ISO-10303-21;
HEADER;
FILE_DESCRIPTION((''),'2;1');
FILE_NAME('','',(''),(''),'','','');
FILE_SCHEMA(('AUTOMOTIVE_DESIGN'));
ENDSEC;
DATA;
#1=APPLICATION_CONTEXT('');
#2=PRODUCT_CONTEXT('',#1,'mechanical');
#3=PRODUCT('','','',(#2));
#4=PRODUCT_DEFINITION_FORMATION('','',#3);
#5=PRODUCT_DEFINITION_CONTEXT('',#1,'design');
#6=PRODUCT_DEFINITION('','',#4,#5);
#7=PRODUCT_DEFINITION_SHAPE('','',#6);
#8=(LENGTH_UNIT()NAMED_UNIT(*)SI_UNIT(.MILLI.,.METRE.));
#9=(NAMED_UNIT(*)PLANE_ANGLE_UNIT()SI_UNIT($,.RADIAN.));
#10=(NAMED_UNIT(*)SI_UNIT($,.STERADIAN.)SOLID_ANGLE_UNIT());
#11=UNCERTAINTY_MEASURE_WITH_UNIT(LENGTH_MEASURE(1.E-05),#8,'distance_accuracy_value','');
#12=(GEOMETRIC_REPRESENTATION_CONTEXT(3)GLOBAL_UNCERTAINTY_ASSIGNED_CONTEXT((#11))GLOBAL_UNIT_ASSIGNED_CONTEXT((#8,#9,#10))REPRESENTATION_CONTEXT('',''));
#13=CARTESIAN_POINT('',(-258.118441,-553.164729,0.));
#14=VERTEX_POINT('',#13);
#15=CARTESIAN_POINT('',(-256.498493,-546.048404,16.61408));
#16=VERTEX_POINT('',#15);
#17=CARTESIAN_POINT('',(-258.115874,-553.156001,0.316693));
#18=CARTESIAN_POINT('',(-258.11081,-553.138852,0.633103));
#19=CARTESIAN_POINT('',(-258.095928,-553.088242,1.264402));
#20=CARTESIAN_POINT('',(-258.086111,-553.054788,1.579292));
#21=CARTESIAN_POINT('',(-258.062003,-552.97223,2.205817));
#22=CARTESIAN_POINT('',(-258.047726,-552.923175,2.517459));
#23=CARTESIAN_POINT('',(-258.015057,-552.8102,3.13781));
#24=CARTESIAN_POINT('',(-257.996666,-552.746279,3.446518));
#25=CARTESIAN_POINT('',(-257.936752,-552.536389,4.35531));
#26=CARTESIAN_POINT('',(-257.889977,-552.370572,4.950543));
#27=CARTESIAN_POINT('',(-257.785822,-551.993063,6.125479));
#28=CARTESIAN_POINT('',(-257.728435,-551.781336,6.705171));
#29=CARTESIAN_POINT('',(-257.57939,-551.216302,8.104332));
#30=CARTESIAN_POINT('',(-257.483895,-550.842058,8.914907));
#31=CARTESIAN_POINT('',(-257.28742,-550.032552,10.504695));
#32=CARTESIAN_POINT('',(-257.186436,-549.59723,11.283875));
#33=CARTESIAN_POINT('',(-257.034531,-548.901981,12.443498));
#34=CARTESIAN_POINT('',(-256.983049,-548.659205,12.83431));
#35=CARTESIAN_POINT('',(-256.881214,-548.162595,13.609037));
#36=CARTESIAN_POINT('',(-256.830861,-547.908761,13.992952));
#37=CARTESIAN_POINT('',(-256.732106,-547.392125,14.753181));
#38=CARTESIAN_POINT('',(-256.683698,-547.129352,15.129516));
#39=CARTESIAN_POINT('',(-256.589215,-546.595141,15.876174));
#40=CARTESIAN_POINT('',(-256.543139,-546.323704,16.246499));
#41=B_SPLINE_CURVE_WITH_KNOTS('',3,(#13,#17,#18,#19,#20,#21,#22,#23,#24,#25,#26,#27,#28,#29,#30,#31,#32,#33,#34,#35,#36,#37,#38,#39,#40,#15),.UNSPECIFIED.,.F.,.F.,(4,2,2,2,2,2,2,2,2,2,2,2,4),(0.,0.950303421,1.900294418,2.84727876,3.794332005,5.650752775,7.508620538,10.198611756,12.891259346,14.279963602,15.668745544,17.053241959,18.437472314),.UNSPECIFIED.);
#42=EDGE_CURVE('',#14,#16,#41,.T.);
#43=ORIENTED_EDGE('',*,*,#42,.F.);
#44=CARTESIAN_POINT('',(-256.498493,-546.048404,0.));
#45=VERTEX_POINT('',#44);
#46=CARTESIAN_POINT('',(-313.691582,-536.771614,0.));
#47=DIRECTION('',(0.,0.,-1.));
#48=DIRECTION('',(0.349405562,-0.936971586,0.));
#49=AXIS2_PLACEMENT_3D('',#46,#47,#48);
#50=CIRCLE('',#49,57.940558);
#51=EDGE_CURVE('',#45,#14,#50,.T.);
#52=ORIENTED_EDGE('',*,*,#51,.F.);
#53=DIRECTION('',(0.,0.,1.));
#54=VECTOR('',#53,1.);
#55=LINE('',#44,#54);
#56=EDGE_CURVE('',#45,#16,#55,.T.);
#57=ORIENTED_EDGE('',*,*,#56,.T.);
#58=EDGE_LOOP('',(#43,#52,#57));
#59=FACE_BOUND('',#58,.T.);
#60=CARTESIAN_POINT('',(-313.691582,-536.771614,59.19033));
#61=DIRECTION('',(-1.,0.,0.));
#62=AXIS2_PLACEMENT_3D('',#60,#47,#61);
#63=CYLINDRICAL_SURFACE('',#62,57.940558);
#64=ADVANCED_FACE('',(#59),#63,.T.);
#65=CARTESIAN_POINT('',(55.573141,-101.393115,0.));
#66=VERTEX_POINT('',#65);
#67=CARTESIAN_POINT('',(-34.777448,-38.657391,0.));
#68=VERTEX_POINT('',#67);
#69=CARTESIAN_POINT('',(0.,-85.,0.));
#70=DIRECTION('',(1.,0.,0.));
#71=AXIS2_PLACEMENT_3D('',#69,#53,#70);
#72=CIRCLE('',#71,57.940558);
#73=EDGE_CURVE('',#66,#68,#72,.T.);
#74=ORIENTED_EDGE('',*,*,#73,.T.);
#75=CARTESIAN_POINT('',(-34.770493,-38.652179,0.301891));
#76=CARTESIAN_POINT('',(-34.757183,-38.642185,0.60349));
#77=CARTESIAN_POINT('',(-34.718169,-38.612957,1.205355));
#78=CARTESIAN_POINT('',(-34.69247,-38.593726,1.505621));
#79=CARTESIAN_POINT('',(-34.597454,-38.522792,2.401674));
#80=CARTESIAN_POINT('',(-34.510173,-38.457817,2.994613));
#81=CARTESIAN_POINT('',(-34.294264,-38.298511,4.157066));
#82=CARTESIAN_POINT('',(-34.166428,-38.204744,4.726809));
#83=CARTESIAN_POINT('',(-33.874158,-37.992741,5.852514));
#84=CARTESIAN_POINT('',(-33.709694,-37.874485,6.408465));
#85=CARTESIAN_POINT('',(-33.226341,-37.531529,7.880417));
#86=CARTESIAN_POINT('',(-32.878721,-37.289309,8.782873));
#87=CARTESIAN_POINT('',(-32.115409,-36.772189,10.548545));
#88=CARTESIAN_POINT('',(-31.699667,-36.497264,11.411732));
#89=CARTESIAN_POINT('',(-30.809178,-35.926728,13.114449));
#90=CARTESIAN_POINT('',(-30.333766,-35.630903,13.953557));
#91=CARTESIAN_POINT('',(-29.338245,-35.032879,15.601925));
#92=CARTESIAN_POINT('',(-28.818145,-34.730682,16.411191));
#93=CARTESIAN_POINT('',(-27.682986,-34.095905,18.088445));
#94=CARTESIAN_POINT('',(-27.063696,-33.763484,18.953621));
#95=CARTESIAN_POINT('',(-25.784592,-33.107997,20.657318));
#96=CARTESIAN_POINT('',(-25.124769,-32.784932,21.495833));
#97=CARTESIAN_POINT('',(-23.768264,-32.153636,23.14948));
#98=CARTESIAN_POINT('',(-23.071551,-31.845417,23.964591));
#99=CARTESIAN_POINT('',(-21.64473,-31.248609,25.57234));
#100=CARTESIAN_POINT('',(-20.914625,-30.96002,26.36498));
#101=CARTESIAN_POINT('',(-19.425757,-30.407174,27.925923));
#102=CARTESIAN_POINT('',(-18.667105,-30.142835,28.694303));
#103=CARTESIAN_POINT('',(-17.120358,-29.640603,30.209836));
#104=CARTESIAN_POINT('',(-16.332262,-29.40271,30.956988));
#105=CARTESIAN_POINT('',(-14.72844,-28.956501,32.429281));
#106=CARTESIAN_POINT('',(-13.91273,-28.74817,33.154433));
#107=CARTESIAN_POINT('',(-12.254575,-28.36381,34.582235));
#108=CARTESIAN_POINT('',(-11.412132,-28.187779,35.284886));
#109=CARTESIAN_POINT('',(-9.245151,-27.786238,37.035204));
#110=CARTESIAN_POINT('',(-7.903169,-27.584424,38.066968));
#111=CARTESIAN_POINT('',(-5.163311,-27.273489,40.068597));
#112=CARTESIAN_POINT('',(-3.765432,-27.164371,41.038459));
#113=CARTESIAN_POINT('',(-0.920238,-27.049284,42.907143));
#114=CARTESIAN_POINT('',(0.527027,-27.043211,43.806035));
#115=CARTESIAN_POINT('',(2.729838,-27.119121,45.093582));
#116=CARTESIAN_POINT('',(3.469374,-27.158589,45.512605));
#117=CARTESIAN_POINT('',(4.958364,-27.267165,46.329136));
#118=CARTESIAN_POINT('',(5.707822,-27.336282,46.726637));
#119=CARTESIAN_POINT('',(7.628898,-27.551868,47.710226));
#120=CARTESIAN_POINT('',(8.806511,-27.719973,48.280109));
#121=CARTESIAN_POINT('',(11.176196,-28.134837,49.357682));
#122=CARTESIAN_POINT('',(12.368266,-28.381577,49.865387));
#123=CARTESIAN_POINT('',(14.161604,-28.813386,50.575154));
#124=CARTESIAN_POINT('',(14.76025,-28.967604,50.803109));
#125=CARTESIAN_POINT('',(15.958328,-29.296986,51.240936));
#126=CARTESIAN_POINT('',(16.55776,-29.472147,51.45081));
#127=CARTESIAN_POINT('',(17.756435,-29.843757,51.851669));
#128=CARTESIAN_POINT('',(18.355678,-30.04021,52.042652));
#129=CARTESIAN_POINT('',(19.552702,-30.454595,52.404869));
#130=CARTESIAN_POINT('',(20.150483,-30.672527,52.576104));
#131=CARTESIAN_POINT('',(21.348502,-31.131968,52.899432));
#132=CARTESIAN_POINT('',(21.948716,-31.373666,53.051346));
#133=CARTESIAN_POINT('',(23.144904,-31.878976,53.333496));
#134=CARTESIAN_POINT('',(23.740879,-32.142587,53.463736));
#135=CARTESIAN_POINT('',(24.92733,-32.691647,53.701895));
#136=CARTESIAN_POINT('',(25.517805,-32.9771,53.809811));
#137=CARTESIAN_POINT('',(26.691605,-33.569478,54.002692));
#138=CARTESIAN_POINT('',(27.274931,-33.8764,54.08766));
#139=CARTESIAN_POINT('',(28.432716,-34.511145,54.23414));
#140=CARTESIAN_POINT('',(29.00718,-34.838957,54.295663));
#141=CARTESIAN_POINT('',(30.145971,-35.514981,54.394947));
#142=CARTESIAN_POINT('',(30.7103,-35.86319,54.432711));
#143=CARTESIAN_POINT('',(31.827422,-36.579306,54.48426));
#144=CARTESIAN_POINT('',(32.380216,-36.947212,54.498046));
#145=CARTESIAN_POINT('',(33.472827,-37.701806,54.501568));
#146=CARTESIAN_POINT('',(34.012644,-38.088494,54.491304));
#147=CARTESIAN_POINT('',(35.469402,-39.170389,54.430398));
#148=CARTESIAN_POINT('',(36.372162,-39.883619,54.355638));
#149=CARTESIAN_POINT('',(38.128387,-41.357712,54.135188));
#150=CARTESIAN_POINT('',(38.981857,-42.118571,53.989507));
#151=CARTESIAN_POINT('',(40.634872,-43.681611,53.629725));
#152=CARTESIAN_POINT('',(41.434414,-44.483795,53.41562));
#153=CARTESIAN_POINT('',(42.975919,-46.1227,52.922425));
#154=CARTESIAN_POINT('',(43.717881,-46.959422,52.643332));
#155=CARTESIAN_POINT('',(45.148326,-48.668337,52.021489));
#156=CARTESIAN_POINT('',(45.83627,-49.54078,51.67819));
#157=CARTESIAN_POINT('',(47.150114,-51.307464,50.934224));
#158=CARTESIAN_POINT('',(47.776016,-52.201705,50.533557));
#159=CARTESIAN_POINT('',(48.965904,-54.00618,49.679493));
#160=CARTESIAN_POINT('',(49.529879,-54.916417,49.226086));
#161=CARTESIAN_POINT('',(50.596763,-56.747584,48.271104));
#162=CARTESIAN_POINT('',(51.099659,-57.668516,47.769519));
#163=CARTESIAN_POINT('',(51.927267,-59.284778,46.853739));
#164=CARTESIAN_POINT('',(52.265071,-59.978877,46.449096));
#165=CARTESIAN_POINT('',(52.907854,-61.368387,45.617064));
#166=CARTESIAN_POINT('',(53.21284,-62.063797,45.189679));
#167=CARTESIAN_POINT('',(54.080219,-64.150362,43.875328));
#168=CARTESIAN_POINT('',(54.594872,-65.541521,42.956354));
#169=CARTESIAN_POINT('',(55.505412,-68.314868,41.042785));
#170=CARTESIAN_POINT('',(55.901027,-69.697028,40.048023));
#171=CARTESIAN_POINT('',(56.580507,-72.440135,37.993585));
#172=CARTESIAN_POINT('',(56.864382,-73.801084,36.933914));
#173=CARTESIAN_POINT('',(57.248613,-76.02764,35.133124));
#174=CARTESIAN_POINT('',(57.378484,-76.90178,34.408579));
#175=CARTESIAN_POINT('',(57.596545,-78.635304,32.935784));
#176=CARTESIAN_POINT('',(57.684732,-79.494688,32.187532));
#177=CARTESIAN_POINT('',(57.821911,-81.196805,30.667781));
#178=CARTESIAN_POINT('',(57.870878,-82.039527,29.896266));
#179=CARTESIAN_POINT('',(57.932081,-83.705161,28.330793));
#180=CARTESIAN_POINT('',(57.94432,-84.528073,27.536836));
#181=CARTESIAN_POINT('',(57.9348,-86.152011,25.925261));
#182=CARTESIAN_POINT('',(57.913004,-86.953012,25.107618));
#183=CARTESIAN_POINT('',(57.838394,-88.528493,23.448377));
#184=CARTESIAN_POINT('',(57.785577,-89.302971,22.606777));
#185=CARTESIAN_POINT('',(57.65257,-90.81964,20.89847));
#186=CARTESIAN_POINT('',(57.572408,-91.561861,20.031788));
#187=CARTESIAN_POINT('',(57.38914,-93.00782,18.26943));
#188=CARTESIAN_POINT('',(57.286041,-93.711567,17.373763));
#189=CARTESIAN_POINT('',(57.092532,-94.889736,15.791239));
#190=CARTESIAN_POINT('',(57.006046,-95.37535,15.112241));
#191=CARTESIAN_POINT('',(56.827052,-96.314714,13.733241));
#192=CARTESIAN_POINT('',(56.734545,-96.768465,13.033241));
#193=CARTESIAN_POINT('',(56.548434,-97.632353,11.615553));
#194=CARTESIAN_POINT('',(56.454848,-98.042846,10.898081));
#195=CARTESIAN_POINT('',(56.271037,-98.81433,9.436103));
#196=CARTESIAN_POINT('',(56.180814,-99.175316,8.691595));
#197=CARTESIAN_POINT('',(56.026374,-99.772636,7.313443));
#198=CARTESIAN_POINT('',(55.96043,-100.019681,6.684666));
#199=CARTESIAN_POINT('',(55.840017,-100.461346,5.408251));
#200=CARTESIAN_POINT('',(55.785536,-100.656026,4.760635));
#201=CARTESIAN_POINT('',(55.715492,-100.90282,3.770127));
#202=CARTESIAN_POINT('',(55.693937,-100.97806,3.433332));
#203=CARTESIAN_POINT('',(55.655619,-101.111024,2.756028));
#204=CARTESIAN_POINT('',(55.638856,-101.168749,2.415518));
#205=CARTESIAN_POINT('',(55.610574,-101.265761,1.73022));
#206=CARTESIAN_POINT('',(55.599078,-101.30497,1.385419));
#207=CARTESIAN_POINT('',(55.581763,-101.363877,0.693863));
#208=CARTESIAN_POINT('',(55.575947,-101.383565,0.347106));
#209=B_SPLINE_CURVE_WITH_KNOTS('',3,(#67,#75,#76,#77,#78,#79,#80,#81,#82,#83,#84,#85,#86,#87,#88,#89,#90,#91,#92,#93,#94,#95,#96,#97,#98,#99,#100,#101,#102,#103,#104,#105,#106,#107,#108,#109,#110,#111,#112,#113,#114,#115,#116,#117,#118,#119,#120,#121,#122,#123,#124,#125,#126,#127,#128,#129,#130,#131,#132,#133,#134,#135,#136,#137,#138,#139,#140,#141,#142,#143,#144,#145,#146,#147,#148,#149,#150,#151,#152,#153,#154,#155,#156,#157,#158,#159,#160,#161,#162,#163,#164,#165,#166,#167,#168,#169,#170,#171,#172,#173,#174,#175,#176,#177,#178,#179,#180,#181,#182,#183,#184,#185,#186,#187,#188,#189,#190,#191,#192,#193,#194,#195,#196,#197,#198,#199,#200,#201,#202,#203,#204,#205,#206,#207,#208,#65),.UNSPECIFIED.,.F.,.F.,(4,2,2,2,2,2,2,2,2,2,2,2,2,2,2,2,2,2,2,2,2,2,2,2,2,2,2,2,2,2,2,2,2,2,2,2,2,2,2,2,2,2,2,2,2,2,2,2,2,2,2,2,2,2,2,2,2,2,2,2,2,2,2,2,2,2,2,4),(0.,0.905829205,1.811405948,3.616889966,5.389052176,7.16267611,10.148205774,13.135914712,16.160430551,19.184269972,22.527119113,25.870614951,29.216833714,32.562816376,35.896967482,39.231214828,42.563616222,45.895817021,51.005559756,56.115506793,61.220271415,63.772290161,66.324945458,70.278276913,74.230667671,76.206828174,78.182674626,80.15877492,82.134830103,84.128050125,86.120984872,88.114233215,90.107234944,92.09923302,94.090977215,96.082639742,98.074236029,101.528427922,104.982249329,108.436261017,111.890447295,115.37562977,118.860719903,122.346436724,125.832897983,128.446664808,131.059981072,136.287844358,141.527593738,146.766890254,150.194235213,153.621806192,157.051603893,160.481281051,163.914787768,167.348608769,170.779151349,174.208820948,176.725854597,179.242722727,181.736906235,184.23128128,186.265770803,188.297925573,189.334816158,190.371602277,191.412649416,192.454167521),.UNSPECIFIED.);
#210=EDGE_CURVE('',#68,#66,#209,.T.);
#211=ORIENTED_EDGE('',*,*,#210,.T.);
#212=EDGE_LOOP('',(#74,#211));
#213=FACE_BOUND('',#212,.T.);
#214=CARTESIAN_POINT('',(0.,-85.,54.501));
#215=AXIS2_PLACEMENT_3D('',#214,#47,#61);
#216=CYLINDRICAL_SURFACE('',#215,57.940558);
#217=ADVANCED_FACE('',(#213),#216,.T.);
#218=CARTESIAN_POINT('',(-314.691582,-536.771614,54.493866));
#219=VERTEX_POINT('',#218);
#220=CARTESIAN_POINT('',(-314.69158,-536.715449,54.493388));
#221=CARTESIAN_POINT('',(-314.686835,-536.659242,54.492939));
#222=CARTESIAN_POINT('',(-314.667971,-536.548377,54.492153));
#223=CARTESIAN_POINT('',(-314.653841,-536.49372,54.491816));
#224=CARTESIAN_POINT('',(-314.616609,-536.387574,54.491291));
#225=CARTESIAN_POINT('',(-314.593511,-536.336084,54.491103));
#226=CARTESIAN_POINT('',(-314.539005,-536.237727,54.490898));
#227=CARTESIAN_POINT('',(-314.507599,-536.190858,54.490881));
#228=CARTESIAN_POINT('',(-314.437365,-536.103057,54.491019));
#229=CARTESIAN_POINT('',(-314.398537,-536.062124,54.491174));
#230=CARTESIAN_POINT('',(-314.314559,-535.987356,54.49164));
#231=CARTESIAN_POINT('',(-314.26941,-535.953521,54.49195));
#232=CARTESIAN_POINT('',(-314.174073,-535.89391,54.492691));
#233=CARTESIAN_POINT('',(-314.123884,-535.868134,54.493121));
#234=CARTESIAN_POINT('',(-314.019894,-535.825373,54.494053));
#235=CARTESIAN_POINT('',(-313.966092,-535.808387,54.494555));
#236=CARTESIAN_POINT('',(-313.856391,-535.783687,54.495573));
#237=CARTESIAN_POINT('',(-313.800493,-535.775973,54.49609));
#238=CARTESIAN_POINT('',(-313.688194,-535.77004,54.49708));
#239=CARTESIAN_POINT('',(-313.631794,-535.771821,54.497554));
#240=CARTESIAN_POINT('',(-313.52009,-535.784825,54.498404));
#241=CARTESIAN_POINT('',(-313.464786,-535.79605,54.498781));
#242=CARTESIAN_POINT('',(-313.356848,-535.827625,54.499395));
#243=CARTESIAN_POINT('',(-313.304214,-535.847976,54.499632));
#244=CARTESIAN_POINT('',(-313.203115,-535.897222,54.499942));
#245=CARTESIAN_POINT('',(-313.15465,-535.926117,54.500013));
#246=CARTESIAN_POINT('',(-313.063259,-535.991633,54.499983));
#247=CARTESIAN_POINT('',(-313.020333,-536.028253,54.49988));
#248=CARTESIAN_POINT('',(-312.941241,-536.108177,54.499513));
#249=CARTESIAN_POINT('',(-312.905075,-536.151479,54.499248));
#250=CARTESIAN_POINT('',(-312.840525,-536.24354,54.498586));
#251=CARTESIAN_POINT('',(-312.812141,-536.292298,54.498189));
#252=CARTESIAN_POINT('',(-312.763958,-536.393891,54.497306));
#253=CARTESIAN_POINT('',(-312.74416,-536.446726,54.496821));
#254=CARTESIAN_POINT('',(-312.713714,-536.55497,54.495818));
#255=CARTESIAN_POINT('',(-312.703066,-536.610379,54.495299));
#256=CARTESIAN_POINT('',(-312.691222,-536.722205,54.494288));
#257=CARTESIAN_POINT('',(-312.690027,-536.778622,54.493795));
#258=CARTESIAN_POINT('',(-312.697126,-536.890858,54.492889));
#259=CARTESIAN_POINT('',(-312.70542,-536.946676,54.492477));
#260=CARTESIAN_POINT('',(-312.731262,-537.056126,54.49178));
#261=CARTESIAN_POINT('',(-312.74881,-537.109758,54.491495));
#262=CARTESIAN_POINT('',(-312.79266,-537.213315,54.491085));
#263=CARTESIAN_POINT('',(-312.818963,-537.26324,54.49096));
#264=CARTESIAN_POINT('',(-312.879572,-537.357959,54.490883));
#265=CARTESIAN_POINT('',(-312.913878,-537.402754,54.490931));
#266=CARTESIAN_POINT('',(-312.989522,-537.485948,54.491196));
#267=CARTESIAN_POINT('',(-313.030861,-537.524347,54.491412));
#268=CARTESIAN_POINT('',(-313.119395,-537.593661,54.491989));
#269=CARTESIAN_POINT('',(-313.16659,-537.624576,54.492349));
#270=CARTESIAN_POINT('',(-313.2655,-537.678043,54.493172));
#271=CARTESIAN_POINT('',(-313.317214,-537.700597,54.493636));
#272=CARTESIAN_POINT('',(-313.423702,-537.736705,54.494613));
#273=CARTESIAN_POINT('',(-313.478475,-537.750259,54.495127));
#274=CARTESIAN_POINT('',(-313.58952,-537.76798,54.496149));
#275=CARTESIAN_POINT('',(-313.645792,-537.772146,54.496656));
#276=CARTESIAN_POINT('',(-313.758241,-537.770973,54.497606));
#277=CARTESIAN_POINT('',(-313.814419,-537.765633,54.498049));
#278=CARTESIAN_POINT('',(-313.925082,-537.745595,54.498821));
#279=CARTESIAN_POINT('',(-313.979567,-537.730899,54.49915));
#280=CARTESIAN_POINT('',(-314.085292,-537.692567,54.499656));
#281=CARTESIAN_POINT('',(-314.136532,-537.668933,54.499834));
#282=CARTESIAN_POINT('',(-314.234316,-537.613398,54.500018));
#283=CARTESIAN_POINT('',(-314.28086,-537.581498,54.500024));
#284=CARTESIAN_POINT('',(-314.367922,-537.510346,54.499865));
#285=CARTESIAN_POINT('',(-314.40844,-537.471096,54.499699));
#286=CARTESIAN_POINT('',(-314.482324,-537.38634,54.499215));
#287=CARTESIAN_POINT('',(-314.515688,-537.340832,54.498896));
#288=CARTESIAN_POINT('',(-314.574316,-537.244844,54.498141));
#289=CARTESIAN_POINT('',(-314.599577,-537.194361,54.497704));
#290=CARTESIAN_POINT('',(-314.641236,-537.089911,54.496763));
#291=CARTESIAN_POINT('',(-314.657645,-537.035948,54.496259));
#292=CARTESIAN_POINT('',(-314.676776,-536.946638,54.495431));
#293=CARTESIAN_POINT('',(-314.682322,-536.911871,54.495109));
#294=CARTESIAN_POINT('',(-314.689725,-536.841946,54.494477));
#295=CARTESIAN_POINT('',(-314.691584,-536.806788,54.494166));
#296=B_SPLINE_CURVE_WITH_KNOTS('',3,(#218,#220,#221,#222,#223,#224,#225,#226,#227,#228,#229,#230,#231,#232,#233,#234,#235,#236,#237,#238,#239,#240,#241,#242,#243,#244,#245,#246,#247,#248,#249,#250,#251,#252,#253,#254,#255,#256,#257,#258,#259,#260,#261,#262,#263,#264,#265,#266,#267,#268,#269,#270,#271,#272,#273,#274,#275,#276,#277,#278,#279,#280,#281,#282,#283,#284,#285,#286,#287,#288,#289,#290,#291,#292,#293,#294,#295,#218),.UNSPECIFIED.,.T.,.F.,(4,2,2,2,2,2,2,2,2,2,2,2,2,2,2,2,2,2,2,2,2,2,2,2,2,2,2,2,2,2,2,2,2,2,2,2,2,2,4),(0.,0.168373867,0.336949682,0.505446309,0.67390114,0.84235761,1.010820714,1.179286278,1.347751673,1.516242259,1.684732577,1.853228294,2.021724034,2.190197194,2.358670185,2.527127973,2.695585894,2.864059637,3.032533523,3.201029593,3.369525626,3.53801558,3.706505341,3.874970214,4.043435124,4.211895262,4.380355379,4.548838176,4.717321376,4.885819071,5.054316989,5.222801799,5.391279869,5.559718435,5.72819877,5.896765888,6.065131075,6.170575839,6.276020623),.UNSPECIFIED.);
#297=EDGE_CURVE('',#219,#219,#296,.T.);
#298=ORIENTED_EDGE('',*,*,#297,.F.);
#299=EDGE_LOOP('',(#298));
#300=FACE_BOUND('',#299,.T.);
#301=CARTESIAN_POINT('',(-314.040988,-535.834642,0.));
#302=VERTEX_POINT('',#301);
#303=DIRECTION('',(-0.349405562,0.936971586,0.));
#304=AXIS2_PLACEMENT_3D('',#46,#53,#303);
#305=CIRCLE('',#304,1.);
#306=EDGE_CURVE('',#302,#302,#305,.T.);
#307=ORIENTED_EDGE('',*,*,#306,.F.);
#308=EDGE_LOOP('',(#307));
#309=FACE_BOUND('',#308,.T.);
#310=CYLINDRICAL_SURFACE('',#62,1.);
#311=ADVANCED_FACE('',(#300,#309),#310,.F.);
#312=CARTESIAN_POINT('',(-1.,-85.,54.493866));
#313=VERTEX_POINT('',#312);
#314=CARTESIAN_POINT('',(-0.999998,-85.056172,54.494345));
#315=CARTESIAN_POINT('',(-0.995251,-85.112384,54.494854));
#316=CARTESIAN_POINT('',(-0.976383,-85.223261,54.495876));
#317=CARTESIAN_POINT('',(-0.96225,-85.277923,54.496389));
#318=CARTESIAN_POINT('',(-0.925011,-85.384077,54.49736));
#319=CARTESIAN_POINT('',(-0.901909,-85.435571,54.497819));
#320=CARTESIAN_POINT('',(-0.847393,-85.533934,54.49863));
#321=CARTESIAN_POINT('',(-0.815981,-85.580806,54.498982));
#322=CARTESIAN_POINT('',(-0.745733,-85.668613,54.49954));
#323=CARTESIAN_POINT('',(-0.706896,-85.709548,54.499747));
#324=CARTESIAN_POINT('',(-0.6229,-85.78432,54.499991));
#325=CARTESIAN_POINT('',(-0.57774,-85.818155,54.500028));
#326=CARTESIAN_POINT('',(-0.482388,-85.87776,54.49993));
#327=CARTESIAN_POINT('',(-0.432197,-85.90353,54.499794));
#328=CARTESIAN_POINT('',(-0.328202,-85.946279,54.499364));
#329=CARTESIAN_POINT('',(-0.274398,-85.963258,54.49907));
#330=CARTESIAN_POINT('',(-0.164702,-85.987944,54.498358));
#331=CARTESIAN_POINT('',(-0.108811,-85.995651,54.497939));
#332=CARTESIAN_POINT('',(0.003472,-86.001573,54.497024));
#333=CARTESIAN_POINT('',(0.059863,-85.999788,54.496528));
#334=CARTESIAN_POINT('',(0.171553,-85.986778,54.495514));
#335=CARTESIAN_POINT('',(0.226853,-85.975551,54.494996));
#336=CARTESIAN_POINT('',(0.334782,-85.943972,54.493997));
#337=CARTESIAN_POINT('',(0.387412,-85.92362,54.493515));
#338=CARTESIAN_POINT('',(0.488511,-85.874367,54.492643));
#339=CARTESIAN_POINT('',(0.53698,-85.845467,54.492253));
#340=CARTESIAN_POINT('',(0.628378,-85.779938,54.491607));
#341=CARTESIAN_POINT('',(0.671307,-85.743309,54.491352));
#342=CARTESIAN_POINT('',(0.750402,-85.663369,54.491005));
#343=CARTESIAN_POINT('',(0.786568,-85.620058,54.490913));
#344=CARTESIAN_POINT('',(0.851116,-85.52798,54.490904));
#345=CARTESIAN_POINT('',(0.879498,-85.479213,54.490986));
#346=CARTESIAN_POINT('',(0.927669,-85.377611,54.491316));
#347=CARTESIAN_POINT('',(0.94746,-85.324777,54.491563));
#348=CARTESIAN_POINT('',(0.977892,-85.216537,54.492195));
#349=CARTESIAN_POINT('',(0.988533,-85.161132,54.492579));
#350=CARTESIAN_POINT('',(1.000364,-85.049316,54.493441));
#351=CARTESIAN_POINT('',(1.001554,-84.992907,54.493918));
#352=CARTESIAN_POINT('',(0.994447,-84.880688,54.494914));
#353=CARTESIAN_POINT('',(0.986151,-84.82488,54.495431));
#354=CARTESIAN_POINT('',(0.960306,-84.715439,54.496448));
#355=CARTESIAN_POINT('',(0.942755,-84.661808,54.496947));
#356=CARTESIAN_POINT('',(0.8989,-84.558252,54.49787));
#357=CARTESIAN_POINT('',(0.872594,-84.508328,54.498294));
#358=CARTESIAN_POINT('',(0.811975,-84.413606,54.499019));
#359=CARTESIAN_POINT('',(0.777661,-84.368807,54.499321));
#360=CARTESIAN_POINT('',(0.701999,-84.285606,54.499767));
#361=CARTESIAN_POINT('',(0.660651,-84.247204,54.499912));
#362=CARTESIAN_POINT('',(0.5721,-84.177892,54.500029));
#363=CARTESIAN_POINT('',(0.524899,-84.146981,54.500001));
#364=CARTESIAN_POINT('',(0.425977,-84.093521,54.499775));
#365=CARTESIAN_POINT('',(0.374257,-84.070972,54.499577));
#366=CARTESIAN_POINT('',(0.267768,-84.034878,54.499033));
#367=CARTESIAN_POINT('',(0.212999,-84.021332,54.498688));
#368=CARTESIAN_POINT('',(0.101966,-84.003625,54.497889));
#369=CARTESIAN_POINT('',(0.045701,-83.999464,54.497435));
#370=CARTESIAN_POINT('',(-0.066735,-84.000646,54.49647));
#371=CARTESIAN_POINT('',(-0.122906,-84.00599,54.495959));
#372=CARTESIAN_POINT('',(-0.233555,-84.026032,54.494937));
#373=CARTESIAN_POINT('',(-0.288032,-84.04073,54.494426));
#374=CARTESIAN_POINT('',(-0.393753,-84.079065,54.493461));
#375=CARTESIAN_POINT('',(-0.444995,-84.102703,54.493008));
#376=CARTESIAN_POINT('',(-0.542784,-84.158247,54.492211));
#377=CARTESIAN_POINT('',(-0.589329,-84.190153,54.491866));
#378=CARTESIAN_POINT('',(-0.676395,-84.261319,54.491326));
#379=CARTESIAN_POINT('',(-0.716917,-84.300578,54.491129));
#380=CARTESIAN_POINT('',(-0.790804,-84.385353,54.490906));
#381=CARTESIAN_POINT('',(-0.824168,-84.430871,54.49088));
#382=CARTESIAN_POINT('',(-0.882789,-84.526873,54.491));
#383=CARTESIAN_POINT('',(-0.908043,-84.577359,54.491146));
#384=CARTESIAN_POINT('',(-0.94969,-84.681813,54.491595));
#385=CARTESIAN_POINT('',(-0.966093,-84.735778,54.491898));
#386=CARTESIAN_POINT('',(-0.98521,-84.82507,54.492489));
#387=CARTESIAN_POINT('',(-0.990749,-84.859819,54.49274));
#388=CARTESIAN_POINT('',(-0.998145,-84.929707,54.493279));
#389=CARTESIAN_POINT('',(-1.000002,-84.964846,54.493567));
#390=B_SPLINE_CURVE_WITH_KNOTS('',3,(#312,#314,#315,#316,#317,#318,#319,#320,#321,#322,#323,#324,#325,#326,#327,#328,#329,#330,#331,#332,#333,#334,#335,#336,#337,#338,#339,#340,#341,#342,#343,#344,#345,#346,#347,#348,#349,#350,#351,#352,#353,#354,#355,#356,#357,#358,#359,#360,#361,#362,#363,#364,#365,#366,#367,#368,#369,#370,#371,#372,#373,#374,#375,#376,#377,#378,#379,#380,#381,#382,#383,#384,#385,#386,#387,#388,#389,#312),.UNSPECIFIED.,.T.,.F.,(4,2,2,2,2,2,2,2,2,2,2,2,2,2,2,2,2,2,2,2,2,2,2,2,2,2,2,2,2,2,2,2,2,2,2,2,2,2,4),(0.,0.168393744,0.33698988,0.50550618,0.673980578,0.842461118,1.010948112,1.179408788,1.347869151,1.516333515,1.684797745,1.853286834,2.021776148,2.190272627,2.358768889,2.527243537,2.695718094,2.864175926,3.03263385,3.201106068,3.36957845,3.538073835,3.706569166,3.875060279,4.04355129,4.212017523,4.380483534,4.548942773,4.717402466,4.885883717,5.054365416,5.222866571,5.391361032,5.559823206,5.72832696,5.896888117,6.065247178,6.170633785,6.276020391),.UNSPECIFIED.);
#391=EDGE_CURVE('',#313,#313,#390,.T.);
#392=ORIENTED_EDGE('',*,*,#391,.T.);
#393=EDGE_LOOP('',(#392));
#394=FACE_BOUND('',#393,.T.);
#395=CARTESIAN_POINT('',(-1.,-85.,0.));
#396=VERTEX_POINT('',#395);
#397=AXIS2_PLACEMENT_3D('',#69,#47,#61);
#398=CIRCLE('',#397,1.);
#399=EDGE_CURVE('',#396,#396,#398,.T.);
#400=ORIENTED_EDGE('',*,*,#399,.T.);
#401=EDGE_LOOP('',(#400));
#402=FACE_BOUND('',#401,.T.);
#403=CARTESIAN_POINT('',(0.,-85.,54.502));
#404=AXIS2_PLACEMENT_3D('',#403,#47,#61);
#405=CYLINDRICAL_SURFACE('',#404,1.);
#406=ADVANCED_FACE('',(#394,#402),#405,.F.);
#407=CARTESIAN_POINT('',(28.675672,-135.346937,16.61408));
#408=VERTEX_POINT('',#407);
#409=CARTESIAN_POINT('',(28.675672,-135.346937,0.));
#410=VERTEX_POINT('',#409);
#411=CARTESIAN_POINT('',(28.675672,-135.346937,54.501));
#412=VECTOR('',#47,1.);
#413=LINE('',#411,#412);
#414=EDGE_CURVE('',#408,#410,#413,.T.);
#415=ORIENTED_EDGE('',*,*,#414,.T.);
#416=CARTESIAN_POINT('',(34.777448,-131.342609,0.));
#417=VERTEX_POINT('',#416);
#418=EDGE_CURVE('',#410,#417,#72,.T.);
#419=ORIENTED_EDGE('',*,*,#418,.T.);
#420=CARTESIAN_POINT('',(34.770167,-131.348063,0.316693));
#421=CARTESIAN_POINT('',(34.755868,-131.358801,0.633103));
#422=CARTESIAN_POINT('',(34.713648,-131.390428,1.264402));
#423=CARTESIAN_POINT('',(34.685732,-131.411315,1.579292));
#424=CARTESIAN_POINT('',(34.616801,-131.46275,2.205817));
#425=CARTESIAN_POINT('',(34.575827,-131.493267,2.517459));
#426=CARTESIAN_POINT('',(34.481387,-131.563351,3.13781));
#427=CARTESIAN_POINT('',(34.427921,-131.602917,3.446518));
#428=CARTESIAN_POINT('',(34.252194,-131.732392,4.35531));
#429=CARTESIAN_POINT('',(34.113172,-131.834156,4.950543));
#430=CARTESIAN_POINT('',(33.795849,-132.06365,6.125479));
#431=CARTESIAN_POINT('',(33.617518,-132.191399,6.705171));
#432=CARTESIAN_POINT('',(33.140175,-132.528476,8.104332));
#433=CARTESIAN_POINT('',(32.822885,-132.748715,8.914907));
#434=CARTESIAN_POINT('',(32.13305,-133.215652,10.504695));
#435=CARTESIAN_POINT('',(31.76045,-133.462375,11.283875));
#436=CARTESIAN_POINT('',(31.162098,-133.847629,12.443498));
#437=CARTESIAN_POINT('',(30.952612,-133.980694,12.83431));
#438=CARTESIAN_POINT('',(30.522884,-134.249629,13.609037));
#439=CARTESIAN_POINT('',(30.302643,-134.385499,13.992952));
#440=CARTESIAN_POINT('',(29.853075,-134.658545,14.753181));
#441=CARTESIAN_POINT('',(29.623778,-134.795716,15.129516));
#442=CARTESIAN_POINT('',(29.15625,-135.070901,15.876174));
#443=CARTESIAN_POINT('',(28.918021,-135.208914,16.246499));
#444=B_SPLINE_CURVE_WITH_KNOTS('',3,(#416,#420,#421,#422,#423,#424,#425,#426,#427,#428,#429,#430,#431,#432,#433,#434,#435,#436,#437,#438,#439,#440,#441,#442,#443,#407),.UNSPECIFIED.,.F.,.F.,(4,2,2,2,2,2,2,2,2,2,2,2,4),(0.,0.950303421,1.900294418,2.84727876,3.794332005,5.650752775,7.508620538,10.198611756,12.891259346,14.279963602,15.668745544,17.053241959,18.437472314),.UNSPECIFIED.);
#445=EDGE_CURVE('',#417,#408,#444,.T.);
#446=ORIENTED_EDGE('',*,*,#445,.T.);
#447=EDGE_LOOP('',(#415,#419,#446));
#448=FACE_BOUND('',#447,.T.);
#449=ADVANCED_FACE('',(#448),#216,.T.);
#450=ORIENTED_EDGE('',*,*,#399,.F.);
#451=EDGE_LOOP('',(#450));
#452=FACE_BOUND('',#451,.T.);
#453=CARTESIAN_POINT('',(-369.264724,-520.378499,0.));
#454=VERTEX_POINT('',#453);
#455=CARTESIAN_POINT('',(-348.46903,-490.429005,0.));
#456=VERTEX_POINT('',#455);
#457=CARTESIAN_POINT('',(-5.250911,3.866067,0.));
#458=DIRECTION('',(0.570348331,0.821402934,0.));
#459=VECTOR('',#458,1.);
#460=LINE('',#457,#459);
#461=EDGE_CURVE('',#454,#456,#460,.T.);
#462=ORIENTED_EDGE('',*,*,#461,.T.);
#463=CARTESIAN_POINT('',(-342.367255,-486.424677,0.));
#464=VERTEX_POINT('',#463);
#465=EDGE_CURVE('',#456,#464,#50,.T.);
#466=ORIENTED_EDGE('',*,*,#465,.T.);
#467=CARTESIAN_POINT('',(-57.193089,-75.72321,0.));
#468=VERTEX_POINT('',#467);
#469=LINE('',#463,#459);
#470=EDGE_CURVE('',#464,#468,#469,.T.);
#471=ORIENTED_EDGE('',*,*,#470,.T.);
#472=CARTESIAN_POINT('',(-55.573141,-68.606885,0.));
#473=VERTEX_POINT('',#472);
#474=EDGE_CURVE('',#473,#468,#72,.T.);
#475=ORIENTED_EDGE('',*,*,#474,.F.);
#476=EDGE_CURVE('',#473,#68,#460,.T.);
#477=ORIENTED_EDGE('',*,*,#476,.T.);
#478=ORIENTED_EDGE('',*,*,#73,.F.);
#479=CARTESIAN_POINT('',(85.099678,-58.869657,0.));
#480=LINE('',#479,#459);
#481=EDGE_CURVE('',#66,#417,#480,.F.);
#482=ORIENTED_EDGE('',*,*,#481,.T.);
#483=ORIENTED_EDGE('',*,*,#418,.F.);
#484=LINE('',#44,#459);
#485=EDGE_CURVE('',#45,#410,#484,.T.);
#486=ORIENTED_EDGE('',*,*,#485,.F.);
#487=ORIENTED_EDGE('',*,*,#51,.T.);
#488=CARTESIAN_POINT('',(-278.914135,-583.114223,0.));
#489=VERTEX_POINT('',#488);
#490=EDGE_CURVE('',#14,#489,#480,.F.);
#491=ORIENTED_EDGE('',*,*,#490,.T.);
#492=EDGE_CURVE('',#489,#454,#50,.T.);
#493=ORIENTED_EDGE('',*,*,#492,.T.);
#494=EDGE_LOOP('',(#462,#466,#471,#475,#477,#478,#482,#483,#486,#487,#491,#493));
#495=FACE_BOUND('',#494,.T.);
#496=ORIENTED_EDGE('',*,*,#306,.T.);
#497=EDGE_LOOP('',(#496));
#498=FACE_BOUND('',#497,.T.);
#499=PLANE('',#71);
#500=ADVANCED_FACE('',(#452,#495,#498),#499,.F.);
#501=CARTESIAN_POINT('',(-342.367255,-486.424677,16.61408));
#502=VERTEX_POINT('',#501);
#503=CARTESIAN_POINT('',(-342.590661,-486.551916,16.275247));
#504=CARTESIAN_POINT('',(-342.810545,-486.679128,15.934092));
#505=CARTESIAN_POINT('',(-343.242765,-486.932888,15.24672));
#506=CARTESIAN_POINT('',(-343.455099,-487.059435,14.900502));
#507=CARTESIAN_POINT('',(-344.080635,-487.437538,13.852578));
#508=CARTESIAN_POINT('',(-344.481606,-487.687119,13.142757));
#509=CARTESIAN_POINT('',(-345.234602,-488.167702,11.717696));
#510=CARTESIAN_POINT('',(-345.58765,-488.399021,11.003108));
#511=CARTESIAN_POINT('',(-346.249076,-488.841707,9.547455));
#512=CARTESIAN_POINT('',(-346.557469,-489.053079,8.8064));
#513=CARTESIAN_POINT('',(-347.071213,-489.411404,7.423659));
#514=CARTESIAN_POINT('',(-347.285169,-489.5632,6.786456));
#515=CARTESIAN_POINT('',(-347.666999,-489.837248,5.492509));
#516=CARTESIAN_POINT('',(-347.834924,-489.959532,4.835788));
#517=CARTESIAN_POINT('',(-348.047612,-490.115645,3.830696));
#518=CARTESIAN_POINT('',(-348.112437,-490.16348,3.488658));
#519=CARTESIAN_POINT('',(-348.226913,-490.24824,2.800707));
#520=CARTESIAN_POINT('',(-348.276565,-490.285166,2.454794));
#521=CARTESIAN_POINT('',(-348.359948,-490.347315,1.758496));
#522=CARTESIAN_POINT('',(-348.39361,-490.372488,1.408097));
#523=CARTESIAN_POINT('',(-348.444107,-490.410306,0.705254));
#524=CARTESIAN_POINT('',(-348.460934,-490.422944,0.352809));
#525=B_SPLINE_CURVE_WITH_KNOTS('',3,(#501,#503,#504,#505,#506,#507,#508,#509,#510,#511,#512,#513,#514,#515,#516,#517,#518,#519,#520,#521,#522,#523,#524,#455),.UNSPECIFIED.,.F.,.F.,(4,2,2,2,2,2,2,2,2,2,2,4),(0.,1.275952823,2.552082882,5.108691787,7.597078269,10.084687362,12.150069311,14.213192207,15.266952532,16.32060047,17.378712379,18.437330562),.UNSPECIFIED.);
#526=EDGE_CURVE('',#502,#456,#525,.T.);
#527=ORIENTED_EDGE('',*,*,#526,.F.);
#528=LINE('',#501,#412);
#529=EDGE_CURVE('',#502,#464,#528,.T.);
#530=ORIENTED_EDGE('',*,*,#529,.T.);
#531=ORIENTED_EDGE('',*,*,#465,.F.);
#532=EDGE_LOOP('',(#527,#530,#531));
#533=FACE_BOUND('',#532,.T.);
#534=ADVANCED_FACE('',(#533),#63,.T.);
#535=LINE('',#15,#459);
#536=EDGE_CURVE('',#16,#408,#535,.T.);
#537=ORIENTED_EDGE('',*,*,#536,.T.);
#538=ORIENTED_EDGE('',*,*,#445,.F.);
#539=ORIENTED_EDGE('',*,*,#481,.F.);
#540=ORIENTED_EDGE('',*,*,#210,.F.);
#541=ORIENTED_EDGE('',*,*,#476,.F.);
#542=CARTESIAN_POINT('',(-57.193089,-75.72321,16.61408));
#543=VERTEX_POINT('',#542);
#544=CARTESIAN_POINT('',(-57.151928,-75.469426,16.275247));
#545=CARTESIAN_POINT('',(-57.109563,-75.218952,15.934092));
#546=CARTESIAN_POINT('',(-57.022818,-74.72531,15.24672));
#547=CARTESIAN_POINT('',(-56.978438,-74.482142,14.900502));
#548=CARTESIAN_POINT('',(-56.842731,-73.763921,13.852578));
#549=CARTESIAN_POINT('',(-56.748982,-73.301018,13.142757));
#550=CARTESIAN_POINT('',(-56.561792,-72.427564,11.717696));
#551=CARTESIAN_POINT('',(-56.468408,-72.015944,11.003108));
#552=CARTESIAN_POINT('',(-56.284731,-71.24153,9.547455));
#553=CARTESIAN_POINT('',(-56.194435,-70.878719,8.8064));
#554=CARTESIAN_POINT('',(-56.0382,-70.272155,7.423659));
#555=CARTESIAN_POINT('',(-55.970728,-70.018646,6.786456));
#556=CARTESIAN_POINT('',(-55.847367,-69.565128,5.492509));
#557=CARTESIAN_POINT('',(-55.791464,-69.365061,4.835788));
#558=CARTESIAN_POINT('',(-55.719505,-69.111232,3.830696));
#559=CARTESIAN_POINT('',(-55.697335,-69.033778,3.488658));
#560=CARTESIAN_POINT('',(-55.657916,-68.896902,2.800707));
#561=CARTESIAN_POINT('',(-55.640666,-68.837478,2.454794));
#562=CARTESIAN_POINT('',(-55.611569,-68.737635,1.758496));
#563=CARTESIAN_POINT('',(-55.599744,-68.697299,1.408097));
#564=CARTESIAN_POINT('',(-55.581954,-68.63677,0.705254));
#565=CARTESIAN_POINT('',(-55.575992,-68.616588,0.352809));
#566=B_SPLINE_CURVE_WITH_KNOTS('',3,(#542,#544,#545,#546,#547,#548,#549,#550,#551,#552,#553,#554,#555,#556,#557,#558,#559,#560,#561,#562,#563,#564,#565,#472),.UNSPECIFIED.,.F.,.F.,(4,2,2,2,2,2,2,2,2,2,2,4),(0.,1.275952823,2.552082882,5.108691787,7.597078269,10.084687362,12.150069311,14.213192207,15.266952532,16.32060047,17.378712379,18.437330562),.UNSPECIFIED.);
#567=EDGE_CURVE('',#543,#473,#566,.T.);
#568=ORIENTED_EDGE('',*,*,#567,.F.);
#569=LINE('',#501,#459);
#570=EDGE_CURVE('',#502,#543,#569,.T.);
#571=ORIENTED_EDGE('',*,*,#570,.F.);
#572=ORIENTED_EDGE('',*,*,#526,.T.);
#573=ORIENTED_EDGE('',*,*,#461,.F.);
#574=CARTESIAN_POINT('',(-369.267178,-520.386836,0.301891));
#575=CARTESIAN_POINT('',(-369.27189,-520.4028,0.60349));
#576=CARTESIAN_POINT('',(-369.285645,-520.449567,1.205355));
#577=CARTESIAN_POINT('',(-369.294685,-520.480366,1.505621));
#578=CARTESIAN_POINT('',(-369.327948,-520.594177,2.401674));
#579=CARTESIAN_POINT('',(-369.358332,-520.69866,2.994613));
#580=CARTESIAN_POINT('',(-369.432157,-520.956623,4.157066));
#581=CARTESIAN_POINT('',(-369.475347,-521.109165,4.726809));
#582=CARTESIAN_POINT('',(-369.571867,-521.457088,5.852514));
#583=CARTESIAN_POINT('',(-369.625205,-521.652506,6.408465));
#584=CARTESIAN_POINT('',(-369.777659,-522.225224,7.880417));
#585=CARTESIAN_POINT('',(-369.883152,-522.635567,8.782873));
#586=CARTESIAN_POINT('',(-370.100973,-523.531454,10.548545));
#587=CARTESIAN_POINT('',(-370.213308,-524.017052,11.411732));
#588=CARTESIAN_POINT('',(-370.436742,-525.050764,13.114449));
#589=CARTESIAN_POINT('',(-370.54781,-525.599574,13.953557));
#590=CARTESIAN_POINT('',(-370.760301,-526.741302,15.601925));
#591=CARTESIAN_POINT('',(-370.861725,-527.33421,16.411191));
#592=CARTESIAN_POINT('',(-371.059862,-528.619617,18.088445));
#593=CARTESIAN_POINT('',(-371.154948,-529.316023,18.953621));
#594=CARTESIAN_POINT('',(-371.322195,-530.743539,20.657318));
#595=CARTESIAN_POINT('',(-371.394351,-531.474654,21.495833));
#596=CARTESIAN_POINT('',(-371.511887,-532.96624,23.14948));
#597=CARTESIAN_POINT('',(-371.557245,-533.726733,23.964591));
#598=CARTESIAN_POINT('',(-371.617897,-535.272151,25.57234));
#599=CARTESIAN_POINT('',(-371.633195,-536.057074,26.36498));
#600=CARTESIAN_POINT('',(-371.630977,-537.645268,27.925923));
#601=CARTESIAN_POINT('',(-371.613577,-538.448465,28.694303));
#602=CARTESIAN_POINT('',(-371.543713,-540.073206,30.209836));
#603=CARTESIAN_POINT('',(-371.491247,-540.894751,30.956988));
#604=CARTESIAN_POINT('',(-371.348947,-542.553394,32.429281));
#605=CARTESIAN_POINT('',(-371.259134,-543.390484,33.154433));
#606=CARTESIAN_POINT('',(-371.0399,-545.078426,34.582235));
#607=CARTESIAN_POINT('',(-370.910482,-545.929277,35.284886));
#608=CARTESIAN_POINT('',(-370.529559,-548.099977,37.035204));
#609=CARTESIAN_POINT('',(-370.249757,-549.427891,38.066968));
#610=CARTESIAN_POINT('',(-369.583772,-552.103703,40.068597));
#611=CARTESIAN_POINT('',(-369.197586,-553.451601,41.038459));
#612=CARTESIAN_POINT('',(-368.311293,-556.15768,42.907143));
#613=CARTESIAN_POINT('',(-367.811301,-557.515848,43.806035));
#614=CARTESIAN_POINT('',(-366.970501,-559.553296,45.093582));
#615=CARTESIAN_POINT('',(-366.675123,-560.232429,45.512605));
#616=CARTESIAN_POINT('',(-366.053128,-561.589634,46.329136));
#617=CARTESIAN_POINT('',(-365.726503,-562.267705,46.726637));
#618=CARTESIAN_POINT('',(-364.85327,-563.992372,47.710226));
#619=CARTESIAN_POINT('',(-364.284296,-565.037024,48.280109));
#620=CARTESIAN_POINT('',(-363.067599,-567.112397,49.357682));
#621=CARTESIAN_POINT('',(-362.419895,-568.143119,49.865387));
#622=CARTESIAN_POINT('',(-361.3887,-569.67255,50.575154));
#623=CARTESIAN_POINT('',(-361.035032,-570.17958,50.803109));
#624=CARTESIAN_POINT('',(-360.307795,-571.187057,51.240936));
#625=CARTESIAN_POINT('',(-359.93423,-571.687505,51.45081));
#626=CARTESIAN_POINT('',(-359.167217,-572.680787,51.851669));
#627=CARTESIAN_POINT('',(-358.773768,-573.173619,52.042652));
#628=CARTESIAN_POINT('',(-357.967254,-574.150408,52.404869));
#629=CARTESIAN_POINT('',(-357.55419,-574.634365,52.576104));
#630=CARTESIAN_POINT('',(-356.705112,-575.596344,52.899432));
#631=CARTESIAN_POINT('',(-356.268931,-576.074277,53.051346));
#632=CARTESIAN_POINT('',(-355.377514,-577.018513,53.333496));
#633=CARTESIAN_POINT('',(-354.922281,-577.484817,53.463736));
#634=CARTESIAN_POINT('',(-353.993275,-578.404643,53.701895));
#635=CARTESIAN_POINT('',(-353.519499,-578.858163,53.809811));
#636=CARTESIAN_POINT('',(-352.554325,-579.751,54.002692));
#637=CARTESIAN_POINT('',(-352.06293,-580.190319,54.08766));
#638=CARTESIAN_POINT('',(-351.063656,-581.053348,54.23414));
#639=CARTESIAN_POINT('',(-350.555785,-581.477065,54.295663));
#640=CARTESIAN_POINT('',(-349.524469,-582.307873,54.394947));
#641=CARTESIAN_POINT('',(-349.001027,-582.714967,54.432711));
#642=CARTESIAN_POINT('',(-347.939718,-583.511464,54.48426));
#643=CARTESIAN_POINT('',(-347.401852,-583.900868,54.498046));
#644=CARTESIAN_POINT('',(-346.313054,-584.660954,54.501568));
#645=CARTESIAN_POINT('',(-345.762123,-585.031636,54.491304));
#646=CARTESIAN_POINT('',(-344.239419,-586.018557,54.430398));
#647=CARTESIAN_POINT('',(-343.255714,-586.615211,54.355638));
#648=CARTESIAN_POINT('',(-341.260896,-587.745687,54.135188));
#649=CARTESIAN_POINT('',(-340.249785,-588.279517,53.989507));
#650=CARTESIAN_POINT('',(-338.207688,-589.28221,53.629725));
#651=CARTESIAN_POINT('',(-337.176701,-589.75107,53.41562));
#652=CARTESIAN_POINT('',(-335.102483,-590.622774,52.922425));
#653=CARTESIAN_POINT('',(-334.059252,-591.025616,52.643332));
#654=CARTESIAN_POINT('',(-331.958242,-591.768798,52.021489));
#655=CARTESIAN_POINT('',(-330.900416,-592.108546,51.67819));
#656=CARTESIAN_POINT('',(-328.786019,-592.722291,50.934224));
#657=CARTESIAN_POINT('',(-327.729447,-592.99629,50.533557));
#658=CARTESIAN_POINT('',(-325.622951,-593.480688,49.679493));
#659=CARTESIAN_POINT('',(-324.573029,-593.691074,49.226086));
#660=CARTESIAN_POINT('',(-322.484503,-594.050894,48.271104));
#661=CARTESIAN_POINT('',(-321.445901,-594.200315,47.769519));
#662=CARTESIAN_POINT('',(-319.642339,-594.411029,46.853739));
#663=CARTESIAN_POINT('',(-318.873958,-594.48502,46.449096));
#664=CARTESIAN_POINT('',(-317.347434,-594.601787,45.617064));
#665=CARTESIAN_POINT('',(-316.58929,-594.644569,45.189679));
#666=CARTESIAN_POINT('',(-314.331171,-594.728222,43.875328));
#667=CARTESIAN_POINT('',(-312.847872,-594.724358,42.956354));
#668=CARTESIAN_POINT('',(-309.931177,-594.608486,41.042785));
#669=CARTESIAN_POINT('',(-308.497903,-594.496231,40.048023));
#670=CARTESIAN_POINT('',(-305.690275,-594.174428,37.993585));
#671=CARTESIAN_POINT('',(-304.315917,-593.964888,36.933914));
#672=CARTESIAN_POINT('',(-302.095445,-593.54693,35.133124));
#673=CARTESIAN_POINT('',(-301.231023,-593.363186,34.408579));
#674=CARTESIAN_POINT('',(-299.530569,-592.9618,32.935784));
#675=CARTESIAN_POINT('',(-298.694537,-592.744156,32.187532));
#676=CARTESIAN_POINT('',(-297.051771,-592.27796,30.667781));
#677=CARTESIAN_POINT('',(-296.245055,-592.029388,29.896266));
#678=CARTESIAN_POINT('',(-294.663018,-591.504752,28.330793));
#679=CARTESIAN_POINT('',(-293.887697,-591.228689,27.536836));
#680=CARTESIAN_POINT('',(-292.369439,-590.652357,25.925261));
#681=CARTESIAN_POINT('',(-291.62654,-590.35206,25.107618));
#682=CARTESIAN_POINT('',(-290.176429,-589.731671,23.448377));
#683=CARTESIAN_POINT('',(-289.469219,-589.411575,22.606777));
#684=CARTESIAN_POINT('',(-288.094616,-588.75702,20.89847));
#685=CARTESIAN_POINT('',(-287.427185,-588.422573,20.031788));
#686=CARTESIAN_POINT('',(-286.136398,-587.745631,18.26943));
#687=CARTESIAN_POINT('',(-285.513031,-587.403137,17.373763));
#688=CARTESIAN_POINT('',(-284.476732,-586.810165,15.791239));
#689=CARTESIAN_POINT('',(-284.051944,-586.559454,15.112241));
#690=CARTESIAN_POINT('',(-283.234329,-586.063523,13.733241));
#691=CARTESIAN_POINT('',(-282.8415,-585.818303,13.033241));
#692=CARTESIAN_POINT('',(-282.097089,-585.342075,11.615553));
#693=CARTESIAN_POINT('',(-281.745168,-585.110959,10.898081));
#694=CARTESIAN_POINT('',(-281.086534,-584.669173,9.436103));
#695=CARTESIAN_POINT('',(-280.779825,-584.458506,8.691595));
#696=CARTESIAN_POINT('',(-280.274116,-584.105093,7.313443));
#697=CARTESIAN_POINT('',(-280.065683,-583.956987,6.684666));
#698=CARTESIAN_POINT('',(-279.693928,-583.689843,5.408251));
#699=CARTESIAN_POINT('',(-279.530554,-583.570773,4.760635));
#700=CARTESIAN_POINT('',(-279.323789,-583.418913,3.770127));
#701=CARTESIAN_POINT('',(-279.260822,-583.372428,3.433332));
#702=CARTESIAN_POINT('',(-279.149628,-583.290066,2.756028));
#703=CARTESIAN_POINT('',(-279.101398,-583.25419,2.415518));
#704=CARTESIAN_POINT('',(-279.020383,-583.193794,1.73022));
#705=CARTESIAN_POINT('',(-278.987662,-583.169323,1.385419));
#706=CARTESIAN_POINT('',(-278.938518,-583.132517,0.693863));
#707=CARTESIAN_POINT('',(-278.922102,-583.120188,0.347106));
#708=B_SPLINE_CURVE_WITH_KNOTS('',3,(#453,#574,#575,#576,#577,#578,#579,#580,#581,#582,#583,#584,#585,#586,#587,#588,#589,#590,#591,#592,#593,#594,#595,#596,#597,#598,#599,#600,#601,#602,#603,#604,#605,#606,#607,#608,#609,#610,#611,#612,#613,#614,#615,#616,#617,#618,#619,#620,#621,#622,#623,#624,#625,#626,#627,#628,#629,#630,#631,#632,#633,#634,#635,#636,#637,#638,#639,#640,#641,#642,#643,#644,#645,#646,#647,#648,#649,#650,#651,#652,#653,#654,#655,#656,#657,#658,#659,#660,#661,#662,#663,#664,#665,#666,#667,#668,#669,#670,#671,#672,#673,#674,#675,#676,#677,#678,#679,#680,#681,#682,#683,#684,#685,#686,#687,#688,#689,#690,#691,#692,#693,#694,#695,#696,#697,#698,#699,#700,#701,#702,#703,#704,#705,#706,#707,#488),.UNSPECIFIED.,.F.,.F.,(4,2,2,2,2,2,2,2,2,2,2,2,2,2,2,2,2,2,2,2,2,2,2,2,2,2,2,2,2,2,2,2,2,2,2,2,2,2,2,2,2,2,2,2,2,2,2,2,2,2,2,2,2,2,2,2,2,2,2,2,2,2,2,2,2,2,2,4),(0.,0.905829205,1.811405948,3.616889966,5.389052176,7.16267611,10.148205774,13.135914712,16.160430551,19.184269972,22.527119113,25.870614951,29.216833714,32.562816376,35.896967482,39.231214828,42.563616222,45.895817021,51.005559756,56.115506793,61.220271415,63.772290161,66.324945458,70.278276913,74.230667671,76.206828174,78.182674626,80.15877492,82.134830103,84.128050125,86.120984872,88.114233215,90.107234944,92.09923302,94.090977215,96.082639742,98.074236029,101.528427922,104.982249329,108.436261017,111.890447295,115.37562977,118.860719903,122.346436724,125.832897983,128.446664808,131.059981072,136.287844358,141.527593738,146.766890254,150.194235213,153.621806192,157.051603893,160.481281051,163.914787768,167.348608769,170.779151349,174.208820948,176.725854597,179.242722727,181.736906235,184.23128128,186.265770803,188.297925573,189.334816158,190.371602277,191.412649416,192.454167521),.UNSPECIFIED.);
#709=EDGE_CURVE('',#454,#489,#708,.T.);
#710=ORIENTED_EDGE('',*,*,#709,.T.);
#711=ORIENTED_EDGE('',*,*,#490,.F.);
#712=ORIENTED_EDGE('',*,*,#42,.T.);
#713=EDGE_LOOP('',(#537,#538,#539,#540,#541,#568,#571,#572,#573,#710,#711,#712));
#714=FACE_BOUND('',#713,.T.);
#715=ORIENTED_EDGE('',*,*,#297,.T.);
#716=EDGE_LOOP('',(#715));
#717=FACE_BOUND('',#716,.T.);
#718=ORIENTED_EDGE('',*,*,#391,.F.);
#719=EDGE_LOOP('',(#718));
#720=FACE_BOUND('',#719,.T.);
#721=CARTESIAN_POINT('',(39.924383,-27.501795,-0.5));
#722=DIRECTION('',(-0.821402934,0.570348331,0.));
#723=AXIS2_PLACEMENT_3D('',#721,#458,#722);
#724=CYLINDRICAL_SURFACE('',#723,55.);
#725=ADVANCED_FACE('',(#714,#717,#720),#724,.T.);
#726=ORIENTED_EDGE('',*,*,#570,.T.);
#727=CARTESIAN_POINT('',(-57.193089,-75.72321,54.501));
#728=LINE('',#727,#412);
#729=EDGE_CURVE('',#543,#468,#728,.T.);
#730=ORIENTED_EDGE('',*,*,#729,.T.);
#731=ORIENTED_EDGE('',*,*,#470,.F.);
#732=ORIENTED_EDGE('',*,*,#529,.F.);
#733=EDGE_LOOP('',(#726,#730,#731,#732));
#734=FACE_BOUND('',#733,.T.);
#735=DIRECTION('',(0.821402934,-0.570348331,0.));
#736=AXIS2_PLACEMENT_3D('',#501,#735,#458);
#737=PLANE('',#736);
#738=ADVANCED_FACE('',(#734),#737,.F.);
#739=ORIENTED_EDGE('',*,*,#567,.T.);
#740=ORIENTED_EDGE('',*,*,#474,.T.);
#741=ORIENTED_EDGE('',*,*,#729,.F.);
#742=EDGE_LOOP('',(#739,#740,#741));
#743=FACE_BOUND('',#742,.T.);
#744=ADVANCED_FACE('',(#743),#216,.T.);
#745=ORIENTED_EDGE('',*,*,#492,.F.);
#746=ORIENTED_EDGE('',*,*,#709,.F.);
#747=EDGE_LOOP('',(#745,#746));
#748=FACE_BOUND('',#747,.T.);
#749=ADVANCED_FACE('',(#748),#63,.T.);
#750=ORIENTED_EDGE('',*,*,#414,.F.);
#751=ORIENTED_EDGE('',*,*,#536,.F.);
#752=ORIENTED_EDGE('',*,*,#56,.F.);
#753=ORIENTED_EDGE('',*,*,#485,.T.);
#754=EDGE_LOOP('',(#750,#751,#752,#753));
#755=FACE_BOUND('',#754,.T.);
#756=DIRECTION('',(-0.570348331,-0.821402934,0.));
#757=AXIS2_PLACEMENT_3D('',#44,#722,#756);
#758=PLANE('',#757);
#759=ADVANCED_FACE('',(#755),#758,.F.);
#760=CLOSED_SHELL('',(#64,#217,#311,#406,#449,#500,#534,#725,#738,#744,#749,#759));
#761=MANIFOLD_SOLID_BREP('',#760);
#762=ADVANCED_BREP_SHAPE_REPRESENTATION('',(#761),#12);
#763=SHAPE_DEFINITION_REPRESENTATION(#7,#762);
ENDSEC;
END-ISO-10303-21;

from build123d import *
from build123d.topology import SkipClean

# Parameters (mm, degrees)
BOSS_EXTRUDE1_START     = -88.049944887
BOSS_EXTRUDE1_DEPTH     = 36.461390913
BOSS_EXTRUDE1_2_DEPTH   = 54.5
BOSS_EXTRUDE1_START_2   = -94.81924943
BOSS_EXTRUDE1_3_DEPTH   = 83.81924943
CUT_EXTRUDE2_REACH      = 158.991
CUT_EXTRUDE2_END_RADIUS = 55
SKETCH6_R               = 1
BOSS_EXTRUDE3_START     = 500
BOSS_EXTRUDE3_DEPTH     = 500


with BuildPart() as part:
    # Boss-Extrude1: read off the stored shape, not the designer's step
    # Boss-Extrude1 outline → Boss-Extrude1 (new body)
    with BuildSketch(Plane(origin=(0, 0, 0), x_dir=(0.8214029344741598, -0.570348331493342, 0), z_dir=(0.570348331493342, 0.8214029344741599, 0)).offset(BOSS_EXTRUDE1_START)):
        with BuildLine():
            Line((103.477335403, 0), (-6.518119049, 0))
            ThreePointArc((-6.518119049, 0), (48.479608177, -54.5), (103.477335403, 0))
        make_face()
    boss_extrude1 = extrude(amount=BOSS_EXTRUDE1_DEPTH)

    # Boss-Extrude1 2 outline → Boss-Extrude1 2 (add)
    with BuildSketch(Plane.XY):
        with BuildLine():
            ThreePointArc((-55.573141325, -68.606884869), (-56.495275826, -72.13951518), (-57.193088924, -75.72320962))
            Line((-57.193088924, -75.72320962), (28.67567235, -135.346937104))
            ThreePointArc((28.67567235, -135.346937104), (31.789672436, -133.440943291), (34.77744774, -131.342608787))
            Line((34.77744774, -131.342608787), (-55.573141325, -68.606884869))
        make_face()
        with BuildLine():
            ThreePointArc((55.573141325, -101.393115131), (33.046300577, -37.40745564), (-34.77744774, -38.657391213))
            Line((-34.77744774, -38.657391213), (55.573141325, -101.393115131))
        make_face()
    boss_extrude1_2 = extrude(amount=BOSS_EXTRUDE1_2_DEPTH)

    # Boss-Extrude1 3 outline → Boss-Extrude1 3 (cut)
    with SkipClean():  # the faces are left unmerged after this step: merging them gives an invalid solid
        with BuildSketch(Plane(origin=(0, 0, 0), x_dir=(0.8214029344741598, -0.570348331493342, 0), z_dir=(0.570348331493342, 0.8214029344741599, 0)).offset(BOSS_EXTRUDE1_START_2)):
            with BuildLine():
                ThreePointArc((48.479608177, -54.5), (9.765915509, -38.567249711), (-6.518119049, 0))
                Line((-6.518119049, 0), (-6.536301619, 2))
                Line((-6.536301619, 2), (-8, 2))
                Line((-8, 2), (-8, -56))
                Line((-8, -56), (105, -56))
                Line((105, -56), (105, 2))
                Line((105, 2), (103.495517973, 2))
                Line((103.495517973, 2), (103.477335403, 0))
                ThreePointArc((103.477335403, 0), (87.193300845, -38.567249711), (48.479608177, -54.5))
            make_face()
        boss_extrude1_3 = extrude(amount=BOSS_EXTRUDE1_3_DEPTH, mode=Mode.SUBTRACT)

    # Cut-Extrude2: up to this cylinder (the profile starts inside it)
    with SkipClean():  # the faces are left unmerged after this step: merging them gives an invalid solid
        cut_extrude2_end = Plane(origin=(0, -85, -0.5), z_dir=(0.5703483314933416, 0.82140293447416, 0)) * Cylinder(CUT_EXTRUDE2_END_RADIUS, 428.982, mode=Mode.PRIVATE)
        # Sketch6 → Cut-Extrude2 (cut, up to the surface)
        with BuildSketch(Plane(origin=(0, 0, 0), x_dir=(-1, 0, 0), z_dir=(0, 0, -1)), mode=Mode.PRIVATE) as cut_extrude2_sk1:
            with Locations((0, -85)):
                Circle(SKETCH6_R)
        cut_extrude2_tool1 = extrude(cut_extrude2_sk1.sketch, amount=-CUT_EXTRUDE2_REACH, mode=Mode.PRIVATE) & cut_extrude2_end
        cut_extrude2 = cut_extrude2_tool1.solids().sort_by_distance((0, -85, 0))[0]
        add(cut_extrude2, mode=Mode.SUBTRACT)

    # Sketch5 → Boss-Extrude3 (add)
    with SkipClean():  # the faces are left unmerged after this step: merging them gives an invalid solid
        with BuildSketch(Plane(origin=(-54.080000706, -77.884809727, 0), x_dir=(0.8214029344741602, -0.5703483314933416, 0), z_dir=(-0.5703483314933416, -0.8214029344741602, 0)).offset(BOSS_EXTRUDE3_START)):
            with BuildLine():
                Line((-3.789964812, 16.614080154), (-3.789964812, 0))
                Line((-3.789964812, 0), (100.749181166, 0))
                Line((100.749181166, 0), (100.749181166, 16.614080154))
                ThreePointArc((100.749181166, 16.614080154), (48.479608177, 54.5), (-3.789964812, 16.614080154))
            make_face()
        extrude(amount=-BOSS_EXTRUDE3_DEPTH)

    # Mirror1: Boss-Extrude1, Boss-Extrude1 2, Boss-Extrude1 3, Cut-Extrude2 across plane
    with SkipClean():  # the faces are left unmerged after this step: merging them gives an invalid solid
        add(boss_extrude1.mirror(Plane(origin=(-196.667083579, -283.235543345, 0), x_dir=(0, 0, 1), z_dir=(-0.5703483314933416, -0.8214029344741602, 0))))
        add(boss_extrude1_2.mirror(Plane(origin=(-196.667083579, -283.235543345, 0), x_dir=(0, 0, 1), z_dir=(-0.5703483314933416, -0.8214029344741602, 0))))
        add(boss_extrude1_3.mirror(Plane(origin=(-196.667083579, -283.235543345, 0), x_dir=(0, 0, 1), z_dir=(-0.5703483314933416, -0.8214029344741602, 0))), mode=Mode.SUBTRACT)
        add(cut_extrude2.mirror(Plane(origin=(-196.667083579, -283.235543345, 0), x_dir=(0, 0, 1), z_dir=(-0.5703483314933416, -0.8214029344741602, 0))), mode=Mode.SUBTRACT)


solid = part.part
